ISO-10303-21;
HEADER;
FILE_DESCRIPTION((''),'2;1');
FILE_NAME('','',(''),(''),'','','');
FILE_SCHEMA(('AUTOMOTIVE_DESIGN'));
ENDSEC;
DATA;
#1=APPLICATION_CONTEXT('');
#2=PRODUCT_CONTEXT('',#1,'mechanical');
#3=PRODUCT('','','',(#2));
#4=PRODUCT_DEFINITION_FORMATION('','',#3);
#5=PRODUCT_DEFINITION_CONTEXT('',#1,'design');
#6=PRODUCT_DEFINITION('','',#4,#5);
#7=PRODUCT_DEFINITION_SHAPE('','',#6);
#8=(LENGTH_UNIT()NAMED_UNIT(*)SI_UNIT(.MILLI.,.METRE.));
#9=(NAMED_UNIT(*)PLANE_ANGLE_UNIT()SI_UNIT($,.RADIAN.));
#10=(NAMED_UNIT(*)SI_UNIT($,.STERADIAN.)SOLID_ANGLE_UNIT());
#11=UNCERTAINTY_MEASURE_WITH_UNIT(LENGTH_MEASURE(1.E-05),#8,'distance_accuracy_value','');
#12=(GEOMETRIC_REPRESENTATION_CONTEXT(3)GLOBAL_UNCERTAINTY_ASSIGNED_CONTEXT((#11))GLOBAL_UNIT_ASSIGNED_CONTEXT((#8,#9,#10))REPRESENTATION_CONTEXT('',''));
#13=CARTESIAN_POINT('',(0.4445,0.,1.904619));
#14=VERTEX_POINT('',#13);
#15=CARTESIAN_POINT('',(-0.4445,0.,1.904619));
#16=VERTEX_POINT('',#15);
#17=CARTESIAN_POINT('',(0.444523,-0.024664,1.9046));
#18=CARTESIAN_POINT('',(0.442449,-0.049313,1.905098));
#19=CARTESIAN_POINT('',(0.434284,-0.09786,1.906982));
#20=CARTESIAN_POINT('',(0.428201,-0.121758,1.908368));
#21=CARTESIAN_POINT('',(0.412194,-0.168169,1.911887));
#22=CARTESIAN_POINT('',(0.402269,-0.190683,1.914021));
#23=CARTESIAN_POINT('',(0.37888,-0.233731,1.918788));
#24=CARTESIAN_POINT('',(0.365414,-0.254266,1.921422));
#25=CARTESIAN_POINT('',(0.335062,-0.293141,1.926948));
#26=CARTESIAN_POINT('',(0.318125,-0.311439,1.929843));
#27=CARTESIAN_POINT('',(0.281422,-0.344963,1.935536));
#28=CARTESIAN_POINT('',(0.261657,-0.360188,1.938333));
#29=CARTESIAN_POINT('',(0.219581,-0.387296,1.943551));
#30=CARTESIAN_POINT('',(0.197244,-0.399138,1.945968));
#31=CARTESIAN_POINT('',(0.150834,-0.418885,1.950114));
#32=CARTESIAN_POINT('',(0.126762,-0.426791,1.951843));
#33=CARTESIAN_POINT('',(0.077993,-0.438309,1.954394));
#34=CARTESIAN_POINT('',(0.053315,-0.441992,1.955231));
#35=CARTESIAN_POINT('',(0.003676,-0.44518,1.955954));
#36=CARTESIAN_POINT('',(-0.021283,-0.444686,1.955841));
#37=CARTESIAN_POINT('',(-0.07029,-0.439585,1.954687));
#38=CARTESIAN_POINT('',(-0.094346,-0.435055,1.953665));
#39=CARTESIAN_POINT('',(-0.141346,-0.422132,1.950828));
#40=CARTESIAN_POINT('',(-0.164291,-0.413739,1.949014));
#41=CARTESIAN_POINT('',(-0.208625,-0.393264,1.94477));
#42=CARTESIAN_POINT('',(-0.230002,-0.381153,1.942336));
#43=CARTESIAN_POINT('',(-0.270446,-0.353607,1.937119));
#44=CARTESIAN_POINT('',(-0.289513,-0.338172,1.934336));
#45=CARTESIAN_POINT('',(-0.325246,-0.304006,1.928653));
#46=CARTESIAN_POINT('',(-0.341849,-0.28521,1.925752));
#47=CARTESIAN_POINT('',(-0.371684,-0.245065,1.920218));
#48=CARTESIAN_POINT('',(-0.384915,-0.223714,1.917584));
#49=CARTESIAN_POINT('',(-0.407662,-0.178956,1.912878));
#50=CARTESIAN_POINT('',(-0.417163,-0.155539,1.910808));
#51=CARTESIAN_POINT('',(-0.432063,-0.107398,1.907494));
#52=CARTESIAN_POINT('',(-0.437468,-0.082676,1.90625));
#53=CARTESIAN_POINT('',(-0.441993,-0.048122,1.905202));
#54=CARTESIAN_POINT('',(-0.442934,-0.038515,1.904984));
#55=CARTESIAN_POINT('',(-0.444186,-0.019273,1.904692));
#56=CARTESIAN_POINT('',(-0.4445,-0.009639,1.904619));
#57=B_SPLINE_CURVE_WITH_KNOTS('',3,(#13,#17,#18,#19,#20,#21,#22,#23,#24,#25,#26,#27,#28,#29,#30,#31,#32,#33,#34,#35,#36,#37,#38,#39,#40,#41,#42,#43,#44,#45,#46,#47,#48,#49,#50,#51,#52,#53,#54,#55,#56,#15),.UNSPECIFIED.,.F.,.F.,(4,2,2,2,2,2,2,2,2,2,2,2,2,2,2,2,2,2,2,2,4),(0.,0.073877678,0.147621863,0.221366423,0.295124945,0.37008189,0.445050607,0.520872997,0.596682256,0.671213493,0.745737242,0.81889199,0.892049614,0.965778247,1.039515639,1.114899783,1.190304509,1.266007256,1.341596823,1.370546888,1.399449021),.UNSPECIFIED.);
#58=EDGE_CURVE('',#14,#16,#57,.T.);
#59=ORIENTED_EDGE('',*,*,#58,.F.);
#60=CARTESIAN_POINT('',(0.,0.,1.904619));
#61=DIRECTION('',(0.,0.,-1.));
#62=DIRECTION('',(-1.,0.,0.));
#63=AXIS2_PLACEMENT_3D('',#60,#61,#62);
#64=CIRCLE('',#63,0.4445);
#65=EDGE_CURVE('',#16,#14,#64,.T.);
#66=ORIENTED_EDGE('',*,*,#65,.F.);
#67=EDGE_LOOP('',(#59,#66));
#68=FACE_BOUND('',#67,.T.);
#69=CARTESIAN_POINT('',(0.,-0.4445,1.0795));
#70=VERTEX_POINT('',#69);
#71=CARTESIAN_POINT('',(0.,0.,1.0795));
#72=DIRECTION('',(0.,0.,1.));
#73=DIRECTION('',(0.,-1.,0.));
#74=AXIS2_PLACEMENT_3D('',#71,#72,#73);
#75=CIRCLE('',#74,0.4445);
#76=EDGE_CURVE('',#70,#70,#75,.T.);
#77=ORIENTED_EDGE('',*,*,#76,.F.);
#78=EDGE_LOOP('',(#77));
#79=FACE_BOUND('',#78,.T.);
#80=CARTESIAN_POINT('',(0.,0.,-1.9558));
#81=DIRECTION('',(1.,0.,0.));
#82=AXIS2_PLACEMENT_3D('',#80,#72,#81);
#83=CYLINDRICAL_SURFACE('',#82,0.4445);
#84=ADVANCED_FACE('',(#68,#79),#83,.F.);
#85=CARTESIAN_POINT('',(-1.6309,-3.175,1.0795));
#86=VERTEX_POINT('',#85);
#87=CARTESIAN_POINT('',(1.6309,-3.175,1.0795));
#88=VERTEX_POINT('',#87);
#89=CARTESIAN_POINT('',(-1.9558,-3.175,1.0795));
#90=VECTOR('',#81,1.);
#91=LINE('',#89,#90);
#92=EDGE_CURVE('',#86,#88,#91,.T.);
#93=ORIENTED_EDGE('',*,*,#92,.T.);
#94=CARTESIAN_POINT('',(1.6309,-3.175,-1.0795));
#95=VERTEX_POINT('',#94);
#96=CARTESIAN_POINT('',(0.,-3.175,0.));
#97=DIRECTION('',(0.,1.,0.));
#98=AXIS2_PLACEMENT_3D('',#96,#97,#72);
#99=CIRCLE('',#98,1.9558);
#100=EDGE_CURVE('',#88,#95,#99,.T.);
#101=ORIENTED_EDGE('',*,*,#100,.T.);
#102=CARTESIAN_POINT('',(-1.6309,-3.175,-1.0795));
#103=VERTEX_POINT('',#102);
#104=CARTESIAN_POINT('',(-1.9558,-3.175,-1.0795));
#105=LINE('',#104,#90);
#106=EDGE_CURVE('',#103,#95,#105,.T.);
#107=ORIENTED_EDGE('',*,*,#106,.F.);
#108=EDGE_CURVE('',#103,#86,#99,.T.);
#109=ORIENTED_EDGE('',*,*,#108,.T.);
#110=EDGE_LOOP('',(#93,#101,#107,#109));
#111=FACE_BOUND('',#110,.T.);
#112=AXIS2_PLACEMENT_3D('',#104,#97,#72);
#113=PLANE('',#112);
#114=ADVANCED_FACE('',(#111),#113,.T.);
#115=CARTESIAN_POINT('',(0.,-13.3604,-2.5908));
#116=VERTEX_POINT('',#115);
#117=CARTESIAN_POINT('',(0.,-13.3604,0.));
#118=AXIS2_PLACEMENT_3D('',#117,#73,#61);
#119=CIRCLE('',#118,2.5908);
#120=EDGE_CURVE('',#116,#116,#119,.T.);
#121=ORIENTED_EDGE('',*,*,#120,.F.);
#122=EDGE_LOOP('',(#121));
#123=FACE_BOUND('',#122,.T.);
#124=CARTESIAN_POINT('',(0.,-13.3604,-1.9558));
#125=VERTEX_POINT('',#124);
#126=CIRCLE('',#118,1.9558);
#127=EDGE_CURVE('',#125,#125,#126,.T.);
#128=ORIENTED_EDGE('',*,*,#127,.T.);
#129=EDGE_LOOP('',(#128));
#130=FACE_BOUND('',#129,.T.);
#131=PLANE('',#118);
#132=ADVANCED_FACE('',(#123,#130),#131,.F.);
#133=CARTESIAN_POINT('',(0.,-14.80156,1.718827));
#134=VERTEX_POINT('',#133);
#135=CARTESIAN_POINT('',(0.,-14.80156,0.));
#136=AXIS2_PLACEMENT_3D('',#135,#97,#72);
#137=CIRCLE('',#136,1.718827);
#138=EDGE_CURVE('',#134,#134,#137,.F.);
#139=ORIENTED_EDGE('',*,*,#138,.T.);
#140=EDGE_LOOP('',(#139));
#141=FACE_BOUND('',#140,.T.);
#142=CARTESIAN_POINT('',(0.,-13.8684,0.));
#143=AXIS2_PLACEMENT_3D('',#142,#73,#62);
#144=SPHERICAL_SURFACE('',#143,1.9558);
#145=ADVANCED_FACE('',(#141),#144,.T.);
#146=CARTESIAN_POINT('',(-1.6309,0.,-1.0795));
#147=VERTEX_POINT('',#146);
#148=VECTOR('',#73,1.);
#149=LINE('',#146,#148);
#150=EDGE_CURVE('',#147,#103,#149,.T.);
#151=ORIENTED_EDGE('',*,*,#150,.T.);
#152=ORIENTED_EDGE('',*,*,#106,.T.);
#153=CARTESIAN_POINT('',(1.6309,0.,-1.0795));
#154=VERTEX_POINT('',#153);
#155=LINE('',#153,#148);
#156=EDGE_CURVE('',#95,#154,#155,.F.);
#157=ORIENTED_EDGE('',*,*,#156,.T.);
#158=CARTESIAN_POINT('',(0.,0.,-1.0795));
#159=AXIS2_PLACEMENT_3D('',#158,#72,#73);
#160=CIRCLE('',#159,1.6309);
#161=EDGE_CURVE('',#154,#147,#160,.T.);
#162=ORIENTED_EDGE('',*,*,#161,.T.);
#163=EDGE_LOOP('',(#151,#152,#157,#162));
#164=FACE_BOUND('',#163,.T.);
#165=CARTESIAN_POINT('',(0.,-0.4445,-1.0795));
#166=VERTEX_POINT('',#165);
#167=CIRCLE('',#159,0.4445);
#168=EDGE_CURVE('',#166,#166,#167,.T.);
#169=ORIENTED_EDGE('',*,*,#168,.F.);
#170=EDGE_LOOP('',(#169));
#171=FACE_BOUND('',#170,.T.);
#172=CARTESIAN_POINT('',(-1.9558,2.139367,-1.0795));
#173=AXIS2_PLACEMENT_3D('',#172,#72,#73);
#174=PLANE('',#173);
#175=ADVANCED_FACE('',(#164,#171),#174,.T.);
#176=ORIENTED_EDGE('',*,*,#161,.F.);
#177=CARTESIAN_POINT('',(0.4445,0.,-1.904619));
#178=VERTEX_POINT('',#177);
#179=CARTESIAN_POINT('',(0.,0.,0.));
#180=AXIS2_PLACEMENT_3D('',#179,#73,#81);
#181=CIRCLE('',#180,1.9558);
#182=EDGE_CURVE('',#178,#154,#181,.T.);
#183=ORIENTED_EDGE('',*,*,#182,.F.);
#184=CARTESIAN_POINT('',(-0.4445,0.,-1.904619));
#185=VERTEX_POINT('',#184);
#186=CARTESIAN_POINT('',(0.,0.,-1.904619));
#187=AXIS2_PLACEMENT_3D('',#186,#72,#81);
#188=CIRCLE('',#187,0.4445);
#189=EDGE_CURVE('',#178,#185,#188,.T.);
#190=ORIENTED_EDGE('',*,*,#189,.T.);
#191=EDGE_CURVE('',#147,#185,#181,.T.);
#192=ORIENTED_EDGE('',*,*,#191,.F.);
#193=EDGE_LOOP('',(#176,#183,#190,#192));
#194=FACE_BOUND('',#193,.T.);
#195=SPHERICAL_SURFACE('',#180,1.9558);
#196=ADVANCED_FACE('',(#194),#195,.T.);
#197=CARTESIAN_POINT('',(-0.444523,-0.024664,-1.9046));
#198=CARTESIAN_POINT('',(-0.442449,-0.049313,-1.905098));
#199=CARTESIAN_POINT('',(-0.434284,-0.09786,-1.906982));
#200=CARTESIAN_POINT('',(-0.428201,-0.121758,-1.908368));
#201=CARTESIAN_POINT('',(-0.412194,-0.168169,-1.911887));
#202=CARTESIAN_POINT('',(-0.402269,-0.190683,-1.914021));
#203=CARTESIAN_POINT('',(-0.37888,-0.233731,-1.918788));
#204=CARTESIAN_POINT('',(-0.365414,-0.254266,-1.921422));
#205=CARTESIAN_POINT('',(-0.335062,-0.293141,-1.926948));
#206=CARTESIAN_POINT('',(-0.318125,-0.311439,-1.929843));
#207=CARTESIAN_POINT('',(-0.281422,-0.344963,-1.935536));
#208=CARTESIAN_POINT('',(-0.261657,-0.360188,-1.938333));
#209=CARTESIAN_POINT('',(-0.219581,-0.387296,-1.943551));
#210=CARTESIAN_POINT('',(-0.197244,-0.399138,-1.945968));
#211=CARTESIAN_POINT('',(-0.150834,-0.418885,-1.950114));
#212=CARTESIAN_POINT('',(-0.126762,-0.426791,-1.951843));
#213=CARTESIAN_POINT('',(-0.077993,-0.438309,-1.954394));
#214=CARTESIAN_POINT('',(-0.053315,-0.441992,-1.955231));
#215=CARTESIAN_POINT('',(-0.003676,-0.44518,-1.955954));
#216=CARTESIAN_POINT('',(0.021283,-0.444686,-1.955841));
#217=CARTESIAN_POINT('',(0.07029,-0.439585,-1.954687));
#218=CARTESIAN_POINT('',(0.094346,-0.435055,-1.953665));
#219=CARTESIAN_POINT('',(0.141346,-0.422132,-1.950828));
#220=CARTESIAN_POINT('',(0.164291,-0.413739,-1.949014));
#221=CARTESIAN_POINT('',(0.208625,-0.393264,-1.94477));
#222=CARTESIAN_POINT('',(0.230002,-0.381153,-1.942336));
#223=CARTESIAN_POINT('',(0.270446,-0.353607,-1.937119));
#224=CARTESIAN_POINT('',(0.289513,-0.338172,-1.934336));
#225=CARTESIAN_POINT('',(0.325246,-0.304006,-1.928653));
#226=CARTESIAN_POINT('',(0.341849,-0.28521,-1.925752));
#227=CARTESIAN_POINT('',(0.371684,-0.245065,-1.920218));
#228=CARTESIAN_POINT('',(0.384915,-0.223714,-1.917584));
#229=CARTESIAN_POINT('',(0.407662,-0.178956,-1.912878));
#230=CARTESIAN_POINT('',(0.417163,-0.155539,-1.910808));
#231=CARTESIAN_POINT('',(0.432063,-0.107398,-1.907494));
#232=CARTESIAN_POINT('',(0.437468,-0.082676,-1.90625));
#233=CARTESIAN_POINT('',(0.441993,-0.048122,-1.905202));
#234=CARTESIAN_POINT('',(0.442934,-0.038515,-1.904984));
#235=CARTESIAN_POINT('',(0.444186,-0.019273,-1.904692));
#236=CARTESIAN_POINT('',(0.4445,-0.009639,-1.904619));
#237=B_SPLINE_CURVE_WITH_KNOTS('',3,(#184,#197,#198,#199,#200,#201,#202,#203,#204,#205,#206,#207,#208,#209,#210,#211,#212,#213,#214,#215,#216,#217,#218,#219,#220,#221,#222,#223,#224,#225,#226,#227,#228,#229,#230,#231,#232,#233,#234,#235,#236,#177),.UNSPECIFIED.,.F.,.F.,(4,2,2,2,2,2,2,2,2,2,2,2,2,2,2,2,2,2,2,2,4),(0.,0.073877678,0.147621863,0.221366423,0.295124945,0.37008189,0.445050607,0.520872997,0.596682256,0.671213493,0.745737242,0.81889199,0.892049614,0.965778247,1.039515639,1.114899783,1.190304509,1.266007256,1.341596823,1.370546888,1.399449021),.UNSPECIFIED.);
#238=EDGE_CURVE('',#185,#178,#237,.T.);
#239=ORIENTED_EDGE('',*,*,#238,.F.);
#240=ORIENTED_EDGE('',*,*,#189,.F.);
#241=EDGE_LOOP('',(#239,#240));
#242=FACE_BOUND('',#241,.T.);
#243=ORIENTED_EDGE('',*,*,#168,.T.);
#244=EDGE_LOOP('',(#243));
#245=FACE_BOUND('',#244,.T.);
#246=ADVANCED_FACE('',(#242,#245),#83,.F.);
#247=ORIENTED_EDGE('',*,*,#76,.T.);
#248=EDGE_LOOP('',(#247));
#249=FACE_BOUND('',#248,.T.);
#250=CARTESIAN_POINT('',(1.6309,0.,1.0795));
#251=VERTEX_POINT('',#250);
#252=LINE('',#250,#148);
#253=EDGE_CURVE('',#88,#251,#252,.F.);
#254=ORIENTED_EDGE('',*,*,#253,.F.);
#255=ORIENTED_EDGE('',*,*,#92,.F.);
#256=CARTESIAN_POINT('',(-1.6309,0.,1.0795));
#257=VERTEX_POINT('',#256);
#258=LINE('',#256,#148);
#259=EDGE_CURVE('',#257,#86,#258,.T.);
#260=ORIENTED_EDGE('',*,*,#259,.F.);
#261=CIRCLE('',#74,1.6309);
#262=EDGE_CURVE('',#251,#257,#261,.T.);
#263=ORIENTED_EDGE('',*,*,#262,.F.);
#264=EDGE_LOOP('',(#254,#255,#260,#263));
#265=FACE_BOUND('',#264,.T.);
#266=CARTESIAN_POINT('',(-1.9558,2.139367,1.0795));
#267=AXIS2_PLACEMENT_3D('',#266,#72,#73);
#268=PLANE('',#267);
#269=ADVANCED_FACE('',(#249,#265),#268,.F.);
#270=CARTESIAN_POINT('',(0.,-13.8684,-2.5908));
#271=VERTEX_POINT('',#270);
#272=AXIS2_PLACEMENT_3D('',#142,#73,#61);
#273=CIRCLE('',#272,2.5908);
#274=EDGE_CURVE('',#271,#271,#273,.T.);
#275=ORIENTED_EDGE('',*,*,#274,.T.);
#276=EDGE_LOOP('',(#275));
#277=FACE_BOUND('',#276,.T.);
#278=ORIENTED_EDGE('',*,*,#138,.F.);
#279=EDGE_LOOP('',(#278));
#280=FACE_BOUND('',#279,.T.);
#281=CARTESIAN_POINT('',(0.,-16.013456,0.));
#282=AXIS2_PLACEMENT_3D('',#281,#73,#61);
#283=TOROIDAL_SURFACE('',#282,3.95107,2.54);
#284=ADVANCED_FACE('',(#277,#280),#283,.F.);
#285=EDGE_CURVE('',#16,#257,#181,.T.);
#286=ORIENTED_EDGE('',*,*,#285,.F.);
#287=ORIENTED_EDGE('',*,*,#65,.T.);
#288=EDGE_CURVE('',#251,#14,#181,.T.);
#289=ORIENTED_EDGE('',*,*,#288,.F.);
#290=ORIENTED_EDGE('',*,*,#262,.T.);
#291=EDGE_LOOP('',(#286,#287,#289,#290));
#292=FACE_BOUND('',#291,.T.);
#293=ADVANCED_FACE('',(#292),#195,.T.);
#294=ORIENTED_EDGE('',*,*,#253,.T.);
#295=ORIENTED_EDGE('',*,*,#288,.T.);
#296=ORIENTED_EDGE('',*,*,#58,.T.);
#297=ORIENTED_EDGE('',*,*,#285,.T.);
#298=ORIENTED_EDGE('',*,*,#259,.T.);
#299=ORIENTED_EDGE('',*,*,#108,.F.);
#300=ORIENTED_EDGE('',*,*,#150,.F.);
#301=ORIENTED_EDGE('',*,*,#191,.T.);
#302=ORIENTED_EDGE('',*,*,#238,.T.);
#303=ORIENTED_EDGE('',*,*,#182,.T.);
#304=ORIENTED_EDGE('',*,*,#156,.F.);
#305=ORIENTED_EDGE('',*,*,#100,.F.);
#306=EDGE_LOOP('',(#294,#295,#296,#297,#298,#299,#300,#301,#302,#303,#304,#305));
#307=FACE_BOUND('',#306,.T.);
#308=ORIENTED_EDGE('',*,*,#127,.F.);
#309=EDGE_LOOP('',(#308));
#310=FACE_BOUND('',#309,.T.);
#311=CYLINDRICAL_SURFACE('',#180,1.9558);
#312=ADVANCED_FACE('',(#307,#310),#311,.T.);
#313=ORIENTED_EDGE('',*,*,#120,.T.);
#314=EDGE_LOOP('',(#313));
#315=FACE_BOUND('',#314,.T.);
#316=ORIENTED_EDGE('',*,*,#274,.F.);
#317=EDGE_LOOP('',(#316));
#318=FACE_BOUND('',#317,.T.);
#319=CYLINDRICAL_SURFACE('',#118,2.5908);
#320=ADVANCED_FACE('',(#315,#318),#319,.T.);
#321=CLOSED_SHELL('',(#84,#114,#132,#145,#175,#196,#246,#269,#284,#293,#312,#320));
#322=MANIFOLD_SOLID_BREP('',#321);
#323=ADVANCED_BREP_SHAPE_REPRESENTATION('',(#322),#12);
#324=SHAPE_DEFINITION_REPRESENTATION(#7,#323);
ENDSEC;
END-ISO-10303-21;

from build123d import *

# Parameters (mm, degrees)
CUT_EXTRUDE1_DEPTH      = 17.064109466
CUT_EXTRUDE1_DEPTH_BACK = 17.064109466
SKETCH2_W               = 2.159
SKETCH2_H               = 5.314367205
CUT_EXTRUDE2_DEPTH      = 17.064109466
CUT_EXTRUDE2_DEPTH_BACK = 17.064109466
SKETCH3_R               = 0.4445
BOSS_EXTRUDE8_START     = -0.508
SKETCH4_R               = 2.5908
SKETCH4_R_2             = 1.9558
BOSS_EXTRUDE8_DEPTH     = 0.508
FILLET1_R               = 2.54


with BuildPart() as part:
    # Sketch1 one side → Revolve1 (revolve)
    with BuildSketch(Plane.XY):
        with BuildLine():
            Line((1.9558, -13.8684), (1.9558, 0))
            ThreePointArc((1.9558, 0), (1.382959443, 1.382959443), (0, 1.9558))
            Line((0, 1.9558), (0, -15.8242))
            ThreePointArc((0, -15.8242), (1.382959443, -15.251359443), (1.9558, -13.8684))
        make_face()
    revolve(axis=Axis((0, 0, 0), (0, -1, 0)))

    # Sketch2 → Cut-Extrude1 (cut, two sides: drawn at the far end of the back side and taken through both)
    with BuildSketch(Plane(origin=(0, 0, 0), x_dir=(0, 0, -1), z_dir=(1, 0, 0)).offset(-CUT_EXTRUDE1_DEPTH_BACK)):
        with Locations((0, -0.517816398)):
            Rectangle(SKETCH2_W, SKETCH2_H)
    extrude(amount=CUT_EXTRUDE1_DEPTH + CUT_EXTRUDE1_DEPTH_BACK, mode=Mode.SUBTRACT)

    # Sketch3 → Cut-Extrude2 (cut, two sides: drawn at the far end of the back side and taken through both)
    with BuildSketch(Plane.XY.offset(-CUT_EXTRUDE2_DEPTH_BACK)):
        Circle(SKETCH3_R)
    extrude(amount=CUT_EXTRUDE2_DEPTH + CUT_EXTRUDE2_DEPTH_BACK, mode=Mode.SUBTRACT)

    # Sketch4 → Boss-Extrude8 (add)
    with BuildSketch(Plane(origin=(0, -13.8684, 0), x_dir=(-1, 0, 0), z_dir=(0, -1, 0)).offset(BOSS_EXTRUDE8_START)):
        with Locations(Location((0, 0, 0), (0, 0, 90))):
            Circle(SKETCH4_R)
        with Locations(Location((0, 0, 0), (0, 0, 213.500760385))):
            Circle(SKETCH4_R_2, mode=Mode.SUBTRACT)
    extrude(amount=BOSS_EXTRUDE8_DEPTH)

    # Fillet1
    # the kernel refuses this fillet: 2.54 mm, written as the material it adds along each edge
    with BuildSketch(Plane(origin=(0, -13.8684, 0), x_dir=(1, 0, 0), z_dir=(0, 0, -1))) as fillet1_piece_1:
        with BuildLine():
            CenterArc((3.951069608, 2.145056315), FILLET1_R, 208.497766198, 29.121746718)
            Line((2.5908, 0), (2.563594608, -0.042901126))
            ThreePointArc((2.563594608, -0.042901126), (2.2733, -0.0508), (1.9558, -0.0508))
            Line((1.9558, -0.0508), (1.905, 0))
            ThreePointArc((1.905, 0), (1.846394024, 0.46888603), (1.674182037, 0.908922167))
            Line((1.674182037, 0.908922167), (1.718826892, 0.933160092))
        make_face()
    revolve(axis=Axis((0, -13.8684, 0), (0, -1, 0)))


solid = part.part
